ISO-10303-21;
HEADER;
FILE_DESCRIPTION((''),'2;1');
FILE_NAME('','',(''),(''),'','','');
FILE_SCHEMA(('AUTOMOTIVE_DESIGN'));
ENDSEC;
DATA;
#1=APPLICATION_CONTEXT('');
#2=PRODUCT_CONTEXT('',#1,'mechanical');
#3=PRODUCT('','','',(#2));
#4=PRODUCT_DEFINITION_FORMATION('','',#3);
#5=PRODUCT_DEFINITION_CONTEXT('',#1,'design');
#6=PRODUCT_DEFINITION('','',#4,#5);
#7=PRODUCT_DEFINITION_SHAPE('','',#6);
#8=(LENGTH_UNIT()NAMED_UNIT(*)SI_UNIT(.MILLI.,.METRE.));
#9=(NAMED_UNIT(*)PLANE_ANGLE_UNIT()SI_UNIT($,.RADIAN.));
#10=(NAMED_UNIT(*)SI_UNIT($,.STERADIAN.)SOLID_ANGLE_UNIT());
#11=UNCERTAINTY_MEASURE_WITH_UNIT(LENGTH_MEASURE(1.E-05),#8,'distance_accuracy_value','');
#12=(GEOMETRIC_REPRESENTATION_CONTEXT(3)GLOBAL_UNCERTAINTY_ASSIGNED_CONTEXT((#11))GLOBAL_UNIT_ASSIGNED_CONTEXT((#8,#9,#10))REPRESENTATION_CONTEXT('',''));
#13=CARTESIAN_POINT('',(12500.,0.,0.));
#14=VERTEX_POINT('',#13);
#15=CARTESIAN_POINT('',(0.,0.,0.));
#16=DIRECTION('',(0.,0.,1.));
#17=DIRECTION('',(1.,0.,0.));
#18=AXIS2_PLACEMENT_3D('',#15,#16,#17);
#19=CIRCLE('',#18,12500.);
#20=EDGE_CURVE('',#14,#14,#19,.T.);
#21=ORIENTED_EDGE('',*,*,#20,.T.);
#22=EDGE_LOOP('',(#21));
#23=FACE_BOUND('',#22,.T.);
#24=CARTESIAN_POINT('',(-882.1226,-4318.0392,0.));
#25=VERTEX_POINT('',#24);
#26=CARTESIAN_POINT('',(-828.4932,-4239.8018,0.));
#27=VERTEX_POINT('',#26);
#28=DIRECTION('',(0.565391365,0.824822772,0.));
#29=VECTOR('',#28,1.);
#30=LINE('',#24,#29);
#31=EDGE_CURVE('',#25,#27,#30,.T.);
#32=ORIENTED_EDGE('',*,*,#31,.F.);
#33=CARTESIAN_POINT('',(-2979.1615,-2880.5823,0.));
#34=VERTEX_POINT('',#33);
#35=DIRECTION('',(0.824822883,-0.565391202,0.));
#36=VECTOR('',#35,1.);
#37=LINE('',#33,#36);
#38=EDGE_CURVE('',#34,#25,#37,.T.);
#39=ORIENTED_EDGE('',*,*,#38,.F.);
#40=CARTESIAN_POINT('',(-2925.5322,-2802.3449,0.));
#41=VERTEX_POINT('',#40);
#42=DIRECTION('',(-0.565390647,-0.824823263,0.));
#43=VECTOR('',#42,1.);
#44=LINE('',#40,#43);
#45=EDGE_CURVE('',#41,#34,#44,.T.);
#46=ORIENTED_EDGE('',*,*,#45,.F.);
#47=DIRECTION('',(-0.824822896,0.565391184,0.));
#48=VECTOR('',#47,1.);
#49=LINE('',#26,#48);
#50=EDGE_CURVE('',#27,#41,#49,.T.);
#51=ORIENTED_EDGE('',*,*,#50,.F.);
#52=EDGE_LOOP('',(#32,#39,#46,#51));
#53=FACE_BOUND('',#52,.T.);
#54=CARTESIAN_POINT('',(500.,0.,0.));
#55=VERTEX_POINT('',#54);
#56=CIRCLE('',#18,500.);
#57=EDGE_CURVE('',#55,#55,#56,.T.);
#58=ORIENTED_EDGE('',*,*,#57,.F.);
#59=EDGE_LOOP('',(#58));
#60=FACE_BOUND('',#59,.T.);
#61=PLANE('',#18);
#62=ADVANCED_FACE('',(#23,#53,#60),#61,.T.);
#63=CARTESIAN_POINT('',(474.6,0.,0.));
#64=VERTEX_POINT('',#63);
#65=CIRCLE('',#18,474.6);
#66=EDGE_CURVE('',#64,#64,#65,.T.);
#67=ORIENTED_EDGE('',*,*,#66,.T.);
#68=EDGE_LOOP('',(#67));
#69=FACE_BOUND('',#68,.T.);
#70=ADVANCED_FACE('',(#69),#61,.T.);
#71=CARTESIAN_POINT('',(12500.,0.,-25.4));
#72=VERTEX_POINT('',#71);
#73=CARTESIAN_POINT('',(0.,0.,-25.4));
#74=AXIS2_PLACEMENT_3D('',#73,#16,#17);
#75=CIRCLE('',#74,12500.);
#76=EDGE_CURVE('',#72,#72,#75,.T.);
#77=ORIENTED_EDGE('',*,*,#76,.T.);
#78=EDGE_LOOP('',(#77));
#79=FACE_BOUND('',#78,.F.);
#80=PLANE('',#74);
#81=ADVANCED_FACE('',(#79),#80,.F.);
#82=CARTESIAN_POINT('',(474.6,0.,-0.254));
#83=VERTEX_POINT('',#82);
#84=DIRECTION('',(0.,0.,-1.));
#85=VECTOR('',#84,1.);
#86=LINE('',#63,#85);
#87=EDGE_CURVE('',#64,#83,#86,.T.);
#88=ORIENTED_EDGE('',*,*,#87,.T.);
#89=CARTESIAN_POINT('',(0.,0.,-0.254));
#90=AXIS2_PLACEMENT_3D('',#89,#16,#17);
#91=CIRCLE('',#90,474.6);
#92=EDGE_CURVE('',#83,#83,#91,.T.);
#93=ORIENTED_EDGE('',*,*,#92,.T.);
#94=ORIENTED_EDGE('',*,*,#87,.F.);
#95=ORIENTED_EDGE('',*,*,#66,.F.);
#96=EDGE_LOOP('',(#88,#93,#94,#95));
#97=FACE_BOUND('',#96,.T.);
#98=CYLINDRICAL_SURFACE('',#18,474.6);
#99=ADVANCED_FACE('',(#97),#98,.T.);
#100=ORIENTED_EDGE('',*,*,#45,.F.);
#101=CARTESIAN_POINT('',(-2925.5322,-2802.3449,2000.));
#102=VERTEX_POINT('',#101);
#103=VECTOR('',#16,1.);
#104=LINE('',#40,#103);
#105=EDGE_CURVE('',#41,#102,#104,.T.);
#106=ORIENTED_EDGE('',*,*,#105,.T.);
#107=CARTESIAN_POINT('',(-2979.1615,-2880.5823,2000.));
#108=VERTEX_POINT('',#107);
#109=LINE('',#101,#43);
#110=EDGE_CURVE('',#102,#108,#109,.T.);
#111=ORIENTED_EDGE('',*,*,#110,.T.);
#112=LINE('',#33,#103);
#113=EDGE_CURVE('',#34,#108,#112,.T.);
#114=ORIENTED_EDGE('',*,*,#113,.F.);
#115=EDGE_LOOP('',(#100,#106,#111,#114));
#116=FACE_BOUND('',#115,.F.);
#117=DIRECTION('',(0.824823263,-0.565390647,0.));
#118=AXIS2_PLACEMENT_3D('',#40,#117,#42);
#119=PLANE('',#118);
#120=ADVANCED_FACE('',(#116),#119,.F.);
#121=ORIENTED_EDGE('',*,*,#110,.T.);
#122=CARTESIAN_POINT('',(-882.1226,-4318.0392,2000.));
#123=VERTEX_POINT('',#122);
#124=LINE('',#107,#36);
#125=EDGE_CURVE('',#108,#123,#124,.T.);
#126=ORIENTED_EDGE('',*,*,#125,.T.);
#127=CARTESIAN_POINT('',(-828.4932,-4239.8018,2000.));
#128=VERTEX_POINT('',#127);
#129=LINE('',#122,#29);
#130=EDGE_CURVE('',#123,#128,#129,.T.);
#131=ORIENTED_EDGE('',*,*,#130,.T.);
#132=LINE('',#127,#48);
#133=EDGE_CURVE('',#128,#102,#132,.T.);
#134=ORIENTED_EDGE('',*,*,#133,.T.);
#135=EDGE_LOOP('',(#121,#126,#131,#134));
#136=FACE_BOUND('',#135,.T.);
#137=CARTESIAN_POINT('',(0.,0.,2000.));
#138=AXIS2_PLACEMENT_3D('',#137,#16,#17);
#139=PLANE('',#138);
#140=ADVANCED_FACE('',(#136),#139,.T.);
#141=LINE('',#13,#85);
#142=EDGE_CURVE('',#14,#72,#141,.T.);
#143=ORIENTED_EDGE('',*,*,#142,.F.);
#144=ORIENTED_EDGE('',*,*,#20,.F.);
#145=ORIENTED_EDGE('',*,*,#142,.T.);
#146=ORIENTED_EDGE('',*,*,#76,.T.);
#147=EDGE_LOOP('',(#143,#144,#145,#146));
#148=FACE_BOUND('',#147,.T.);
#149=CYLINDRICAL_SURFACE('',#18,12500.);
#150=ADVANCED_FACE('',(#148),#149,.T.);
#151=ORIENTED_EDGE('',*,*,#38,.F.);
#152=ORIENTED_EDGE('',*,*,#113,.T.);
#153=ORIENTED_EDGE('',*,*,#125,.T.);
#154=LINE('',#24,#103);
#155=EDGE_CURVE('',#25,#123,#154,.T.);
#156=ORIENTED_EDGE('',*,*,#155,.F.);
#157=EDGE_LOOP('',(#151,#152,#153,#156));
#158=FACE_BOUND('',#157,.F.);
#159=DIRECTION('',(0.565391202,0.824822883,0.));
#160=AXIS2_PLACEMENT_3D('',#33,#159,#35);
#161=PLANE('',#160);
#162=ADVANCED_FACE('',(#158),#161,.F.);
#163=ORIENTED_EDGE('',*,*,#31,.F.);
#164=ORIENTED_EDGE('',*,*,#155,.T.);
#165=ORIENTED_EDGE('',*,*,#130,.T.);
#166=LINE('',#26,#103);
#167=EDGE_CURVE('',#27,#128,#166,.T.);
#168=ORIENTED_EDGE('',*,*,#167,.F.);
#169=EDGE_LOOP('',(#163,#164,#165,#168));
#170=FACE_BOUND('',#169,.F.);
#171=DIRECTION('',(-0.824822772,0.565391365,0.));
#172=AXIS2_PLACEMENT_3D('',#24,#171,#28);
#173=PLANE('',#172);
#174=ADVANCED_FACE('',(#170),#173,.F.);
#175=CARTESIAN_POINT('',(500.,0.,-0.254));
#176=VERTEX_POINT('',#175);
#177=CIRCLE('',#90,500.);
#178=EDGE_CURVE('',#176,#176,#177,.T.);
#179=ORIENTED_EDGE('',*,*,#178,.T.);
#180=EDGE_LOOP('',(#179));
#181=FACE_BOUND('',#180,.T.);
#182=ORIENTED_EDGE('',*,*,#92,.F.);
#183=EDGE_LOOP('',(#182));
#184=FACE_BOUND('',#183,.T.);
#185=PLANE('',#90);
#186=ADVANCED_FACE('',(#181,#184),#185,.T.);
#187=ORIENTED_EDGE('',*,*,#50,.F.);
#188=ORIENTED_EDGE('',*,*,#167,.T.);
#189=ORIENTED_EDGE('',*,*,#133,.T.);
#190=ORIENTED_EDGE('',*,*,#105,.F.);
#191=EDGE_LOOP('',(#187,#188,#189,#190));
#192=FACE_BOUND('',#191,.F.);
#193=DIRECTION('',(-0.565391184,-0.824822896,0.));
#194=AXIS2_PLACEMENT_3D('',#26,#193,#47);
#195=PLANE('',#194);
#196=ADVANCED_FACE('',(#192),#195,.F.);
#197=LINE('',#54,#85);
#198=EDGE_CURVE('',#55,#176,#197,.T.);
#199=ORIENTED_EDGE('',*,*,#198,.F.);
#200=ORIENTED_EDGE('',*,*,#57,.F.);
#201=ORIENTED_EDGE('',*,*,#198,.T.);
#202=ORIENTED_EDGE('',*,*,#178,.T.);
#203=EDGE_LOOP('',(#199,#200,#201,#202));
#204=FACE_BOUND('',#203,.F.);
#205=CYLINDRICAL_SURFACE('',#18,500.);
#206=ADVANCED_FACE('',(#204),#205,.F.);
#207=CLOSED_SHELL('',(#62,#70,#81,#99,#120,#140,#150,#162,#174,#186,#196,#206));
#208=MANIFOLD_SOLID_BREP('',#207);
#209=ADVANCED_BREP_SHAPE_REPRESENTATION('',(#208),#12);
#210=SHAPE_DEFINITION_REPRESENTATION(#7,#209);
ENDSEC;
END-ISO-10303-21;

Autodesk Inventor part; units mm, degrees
ref_plane "YZ Plane" through (0, 0, 0) normal (1, 0, 0) x (0, 1, 0)
ref_plane "XZ Plane" through (0, 0, 0) normal (0, 1, 0) x (-1, 0, 0)
ref_plane "XY Plane" through (0, 0, 0) normal (0, 0, 1) x (1, 0, 0)
sketch "Sketch1" plane through (0, 0, 0) normal (0, 0, 1) x (1, 0, 0)
  circle A0 centre (0, 0) radius 12500
  dimension "d8" = 25000
extrude "Extrusion1" add sketch "Sketch1" against normal blind 25.4
sketch "Sketch2" plane through (0, 0, 0) normal (0, 0, 1) x (1, 0, 0)
  circle A0 centre (0, 0) radius 12500 projected
  circle A1 centre (0, 0) radius 500
  circle A2 centre (0, 0) radius 474.6
  dimension "d2" = 1000
  dimension "d7" = 25.4
extrude "Extrusion2" cut sketch "Sketch2" against normal blind 0.254 contours A1
sketch "Sketch3" plane through (0, 0, 0) normal (0, 0, 1) x (1, 0, 0)
  circle A0 centre (0, 0) radius 500 projected
  circle A1 centre (0, 0) radius 12500 projected
  circle A2 centre (0, 0) radius 500 projected
  line L0 (4523.4478, -4083.8637) -> (3719.9636, -4724.5165)
  line L1 (3719.9636, -4724.5165) -> (3734.5609, -4742.824)
  line L2 (3734.5609, -4742.824) -> (4538.0452, -4102.1712)
  line L3 (4538.0452, -4102.1712) -> (4523.4478, -4083.8637)
  line L4 (4523.4478, -4083.8637) -> (3734.5609, -4742.824) construction
  line L5 (3719.9636, -4724.5165) -> (4538.0452, -4102.1712) construction
  line L6 (-828.4932, -4239.8018) -> (-2925.5322, -2802.3449)
  line L7 (-2925.5322, -2802.3449) -> (-2979.1615, -2880.5823)
  line L8 (-2979.1615, -2880.5823) -> (-882.1226, -4318.0392)
  line L9 (-882.1226, -4318.0392) -> (-828.4932, -4239.8018)
  point P0 (4129.0044, -4413.3439)
  point P1 (-1564.9759, -4707.8399)
extrude "Extrusion3" add sketch "Sketch3" along normal blind 2000 contours L9 L8 L7 L6
sketch "Sketch4" plane through (-882.1226, -4318.0392, 0) normal (-0.5653912, -0.8248229, 0) x (0.8248229, -0.5653912, 0)
  line L0 (0, 0) -> (-2542.4112, 0) projected
  line L1 (0, 0) -> (0, 2000) projected
  line L2 (-2542.4112, 2000) -> (0, 2000) projected
  line L3 (-2542.4112, 0) -> (-2542.4112, 2000) projected
  point P0 (-1713.7864, 0)
extrude "Extrusion4" [suppressed]
properties part number "world"
